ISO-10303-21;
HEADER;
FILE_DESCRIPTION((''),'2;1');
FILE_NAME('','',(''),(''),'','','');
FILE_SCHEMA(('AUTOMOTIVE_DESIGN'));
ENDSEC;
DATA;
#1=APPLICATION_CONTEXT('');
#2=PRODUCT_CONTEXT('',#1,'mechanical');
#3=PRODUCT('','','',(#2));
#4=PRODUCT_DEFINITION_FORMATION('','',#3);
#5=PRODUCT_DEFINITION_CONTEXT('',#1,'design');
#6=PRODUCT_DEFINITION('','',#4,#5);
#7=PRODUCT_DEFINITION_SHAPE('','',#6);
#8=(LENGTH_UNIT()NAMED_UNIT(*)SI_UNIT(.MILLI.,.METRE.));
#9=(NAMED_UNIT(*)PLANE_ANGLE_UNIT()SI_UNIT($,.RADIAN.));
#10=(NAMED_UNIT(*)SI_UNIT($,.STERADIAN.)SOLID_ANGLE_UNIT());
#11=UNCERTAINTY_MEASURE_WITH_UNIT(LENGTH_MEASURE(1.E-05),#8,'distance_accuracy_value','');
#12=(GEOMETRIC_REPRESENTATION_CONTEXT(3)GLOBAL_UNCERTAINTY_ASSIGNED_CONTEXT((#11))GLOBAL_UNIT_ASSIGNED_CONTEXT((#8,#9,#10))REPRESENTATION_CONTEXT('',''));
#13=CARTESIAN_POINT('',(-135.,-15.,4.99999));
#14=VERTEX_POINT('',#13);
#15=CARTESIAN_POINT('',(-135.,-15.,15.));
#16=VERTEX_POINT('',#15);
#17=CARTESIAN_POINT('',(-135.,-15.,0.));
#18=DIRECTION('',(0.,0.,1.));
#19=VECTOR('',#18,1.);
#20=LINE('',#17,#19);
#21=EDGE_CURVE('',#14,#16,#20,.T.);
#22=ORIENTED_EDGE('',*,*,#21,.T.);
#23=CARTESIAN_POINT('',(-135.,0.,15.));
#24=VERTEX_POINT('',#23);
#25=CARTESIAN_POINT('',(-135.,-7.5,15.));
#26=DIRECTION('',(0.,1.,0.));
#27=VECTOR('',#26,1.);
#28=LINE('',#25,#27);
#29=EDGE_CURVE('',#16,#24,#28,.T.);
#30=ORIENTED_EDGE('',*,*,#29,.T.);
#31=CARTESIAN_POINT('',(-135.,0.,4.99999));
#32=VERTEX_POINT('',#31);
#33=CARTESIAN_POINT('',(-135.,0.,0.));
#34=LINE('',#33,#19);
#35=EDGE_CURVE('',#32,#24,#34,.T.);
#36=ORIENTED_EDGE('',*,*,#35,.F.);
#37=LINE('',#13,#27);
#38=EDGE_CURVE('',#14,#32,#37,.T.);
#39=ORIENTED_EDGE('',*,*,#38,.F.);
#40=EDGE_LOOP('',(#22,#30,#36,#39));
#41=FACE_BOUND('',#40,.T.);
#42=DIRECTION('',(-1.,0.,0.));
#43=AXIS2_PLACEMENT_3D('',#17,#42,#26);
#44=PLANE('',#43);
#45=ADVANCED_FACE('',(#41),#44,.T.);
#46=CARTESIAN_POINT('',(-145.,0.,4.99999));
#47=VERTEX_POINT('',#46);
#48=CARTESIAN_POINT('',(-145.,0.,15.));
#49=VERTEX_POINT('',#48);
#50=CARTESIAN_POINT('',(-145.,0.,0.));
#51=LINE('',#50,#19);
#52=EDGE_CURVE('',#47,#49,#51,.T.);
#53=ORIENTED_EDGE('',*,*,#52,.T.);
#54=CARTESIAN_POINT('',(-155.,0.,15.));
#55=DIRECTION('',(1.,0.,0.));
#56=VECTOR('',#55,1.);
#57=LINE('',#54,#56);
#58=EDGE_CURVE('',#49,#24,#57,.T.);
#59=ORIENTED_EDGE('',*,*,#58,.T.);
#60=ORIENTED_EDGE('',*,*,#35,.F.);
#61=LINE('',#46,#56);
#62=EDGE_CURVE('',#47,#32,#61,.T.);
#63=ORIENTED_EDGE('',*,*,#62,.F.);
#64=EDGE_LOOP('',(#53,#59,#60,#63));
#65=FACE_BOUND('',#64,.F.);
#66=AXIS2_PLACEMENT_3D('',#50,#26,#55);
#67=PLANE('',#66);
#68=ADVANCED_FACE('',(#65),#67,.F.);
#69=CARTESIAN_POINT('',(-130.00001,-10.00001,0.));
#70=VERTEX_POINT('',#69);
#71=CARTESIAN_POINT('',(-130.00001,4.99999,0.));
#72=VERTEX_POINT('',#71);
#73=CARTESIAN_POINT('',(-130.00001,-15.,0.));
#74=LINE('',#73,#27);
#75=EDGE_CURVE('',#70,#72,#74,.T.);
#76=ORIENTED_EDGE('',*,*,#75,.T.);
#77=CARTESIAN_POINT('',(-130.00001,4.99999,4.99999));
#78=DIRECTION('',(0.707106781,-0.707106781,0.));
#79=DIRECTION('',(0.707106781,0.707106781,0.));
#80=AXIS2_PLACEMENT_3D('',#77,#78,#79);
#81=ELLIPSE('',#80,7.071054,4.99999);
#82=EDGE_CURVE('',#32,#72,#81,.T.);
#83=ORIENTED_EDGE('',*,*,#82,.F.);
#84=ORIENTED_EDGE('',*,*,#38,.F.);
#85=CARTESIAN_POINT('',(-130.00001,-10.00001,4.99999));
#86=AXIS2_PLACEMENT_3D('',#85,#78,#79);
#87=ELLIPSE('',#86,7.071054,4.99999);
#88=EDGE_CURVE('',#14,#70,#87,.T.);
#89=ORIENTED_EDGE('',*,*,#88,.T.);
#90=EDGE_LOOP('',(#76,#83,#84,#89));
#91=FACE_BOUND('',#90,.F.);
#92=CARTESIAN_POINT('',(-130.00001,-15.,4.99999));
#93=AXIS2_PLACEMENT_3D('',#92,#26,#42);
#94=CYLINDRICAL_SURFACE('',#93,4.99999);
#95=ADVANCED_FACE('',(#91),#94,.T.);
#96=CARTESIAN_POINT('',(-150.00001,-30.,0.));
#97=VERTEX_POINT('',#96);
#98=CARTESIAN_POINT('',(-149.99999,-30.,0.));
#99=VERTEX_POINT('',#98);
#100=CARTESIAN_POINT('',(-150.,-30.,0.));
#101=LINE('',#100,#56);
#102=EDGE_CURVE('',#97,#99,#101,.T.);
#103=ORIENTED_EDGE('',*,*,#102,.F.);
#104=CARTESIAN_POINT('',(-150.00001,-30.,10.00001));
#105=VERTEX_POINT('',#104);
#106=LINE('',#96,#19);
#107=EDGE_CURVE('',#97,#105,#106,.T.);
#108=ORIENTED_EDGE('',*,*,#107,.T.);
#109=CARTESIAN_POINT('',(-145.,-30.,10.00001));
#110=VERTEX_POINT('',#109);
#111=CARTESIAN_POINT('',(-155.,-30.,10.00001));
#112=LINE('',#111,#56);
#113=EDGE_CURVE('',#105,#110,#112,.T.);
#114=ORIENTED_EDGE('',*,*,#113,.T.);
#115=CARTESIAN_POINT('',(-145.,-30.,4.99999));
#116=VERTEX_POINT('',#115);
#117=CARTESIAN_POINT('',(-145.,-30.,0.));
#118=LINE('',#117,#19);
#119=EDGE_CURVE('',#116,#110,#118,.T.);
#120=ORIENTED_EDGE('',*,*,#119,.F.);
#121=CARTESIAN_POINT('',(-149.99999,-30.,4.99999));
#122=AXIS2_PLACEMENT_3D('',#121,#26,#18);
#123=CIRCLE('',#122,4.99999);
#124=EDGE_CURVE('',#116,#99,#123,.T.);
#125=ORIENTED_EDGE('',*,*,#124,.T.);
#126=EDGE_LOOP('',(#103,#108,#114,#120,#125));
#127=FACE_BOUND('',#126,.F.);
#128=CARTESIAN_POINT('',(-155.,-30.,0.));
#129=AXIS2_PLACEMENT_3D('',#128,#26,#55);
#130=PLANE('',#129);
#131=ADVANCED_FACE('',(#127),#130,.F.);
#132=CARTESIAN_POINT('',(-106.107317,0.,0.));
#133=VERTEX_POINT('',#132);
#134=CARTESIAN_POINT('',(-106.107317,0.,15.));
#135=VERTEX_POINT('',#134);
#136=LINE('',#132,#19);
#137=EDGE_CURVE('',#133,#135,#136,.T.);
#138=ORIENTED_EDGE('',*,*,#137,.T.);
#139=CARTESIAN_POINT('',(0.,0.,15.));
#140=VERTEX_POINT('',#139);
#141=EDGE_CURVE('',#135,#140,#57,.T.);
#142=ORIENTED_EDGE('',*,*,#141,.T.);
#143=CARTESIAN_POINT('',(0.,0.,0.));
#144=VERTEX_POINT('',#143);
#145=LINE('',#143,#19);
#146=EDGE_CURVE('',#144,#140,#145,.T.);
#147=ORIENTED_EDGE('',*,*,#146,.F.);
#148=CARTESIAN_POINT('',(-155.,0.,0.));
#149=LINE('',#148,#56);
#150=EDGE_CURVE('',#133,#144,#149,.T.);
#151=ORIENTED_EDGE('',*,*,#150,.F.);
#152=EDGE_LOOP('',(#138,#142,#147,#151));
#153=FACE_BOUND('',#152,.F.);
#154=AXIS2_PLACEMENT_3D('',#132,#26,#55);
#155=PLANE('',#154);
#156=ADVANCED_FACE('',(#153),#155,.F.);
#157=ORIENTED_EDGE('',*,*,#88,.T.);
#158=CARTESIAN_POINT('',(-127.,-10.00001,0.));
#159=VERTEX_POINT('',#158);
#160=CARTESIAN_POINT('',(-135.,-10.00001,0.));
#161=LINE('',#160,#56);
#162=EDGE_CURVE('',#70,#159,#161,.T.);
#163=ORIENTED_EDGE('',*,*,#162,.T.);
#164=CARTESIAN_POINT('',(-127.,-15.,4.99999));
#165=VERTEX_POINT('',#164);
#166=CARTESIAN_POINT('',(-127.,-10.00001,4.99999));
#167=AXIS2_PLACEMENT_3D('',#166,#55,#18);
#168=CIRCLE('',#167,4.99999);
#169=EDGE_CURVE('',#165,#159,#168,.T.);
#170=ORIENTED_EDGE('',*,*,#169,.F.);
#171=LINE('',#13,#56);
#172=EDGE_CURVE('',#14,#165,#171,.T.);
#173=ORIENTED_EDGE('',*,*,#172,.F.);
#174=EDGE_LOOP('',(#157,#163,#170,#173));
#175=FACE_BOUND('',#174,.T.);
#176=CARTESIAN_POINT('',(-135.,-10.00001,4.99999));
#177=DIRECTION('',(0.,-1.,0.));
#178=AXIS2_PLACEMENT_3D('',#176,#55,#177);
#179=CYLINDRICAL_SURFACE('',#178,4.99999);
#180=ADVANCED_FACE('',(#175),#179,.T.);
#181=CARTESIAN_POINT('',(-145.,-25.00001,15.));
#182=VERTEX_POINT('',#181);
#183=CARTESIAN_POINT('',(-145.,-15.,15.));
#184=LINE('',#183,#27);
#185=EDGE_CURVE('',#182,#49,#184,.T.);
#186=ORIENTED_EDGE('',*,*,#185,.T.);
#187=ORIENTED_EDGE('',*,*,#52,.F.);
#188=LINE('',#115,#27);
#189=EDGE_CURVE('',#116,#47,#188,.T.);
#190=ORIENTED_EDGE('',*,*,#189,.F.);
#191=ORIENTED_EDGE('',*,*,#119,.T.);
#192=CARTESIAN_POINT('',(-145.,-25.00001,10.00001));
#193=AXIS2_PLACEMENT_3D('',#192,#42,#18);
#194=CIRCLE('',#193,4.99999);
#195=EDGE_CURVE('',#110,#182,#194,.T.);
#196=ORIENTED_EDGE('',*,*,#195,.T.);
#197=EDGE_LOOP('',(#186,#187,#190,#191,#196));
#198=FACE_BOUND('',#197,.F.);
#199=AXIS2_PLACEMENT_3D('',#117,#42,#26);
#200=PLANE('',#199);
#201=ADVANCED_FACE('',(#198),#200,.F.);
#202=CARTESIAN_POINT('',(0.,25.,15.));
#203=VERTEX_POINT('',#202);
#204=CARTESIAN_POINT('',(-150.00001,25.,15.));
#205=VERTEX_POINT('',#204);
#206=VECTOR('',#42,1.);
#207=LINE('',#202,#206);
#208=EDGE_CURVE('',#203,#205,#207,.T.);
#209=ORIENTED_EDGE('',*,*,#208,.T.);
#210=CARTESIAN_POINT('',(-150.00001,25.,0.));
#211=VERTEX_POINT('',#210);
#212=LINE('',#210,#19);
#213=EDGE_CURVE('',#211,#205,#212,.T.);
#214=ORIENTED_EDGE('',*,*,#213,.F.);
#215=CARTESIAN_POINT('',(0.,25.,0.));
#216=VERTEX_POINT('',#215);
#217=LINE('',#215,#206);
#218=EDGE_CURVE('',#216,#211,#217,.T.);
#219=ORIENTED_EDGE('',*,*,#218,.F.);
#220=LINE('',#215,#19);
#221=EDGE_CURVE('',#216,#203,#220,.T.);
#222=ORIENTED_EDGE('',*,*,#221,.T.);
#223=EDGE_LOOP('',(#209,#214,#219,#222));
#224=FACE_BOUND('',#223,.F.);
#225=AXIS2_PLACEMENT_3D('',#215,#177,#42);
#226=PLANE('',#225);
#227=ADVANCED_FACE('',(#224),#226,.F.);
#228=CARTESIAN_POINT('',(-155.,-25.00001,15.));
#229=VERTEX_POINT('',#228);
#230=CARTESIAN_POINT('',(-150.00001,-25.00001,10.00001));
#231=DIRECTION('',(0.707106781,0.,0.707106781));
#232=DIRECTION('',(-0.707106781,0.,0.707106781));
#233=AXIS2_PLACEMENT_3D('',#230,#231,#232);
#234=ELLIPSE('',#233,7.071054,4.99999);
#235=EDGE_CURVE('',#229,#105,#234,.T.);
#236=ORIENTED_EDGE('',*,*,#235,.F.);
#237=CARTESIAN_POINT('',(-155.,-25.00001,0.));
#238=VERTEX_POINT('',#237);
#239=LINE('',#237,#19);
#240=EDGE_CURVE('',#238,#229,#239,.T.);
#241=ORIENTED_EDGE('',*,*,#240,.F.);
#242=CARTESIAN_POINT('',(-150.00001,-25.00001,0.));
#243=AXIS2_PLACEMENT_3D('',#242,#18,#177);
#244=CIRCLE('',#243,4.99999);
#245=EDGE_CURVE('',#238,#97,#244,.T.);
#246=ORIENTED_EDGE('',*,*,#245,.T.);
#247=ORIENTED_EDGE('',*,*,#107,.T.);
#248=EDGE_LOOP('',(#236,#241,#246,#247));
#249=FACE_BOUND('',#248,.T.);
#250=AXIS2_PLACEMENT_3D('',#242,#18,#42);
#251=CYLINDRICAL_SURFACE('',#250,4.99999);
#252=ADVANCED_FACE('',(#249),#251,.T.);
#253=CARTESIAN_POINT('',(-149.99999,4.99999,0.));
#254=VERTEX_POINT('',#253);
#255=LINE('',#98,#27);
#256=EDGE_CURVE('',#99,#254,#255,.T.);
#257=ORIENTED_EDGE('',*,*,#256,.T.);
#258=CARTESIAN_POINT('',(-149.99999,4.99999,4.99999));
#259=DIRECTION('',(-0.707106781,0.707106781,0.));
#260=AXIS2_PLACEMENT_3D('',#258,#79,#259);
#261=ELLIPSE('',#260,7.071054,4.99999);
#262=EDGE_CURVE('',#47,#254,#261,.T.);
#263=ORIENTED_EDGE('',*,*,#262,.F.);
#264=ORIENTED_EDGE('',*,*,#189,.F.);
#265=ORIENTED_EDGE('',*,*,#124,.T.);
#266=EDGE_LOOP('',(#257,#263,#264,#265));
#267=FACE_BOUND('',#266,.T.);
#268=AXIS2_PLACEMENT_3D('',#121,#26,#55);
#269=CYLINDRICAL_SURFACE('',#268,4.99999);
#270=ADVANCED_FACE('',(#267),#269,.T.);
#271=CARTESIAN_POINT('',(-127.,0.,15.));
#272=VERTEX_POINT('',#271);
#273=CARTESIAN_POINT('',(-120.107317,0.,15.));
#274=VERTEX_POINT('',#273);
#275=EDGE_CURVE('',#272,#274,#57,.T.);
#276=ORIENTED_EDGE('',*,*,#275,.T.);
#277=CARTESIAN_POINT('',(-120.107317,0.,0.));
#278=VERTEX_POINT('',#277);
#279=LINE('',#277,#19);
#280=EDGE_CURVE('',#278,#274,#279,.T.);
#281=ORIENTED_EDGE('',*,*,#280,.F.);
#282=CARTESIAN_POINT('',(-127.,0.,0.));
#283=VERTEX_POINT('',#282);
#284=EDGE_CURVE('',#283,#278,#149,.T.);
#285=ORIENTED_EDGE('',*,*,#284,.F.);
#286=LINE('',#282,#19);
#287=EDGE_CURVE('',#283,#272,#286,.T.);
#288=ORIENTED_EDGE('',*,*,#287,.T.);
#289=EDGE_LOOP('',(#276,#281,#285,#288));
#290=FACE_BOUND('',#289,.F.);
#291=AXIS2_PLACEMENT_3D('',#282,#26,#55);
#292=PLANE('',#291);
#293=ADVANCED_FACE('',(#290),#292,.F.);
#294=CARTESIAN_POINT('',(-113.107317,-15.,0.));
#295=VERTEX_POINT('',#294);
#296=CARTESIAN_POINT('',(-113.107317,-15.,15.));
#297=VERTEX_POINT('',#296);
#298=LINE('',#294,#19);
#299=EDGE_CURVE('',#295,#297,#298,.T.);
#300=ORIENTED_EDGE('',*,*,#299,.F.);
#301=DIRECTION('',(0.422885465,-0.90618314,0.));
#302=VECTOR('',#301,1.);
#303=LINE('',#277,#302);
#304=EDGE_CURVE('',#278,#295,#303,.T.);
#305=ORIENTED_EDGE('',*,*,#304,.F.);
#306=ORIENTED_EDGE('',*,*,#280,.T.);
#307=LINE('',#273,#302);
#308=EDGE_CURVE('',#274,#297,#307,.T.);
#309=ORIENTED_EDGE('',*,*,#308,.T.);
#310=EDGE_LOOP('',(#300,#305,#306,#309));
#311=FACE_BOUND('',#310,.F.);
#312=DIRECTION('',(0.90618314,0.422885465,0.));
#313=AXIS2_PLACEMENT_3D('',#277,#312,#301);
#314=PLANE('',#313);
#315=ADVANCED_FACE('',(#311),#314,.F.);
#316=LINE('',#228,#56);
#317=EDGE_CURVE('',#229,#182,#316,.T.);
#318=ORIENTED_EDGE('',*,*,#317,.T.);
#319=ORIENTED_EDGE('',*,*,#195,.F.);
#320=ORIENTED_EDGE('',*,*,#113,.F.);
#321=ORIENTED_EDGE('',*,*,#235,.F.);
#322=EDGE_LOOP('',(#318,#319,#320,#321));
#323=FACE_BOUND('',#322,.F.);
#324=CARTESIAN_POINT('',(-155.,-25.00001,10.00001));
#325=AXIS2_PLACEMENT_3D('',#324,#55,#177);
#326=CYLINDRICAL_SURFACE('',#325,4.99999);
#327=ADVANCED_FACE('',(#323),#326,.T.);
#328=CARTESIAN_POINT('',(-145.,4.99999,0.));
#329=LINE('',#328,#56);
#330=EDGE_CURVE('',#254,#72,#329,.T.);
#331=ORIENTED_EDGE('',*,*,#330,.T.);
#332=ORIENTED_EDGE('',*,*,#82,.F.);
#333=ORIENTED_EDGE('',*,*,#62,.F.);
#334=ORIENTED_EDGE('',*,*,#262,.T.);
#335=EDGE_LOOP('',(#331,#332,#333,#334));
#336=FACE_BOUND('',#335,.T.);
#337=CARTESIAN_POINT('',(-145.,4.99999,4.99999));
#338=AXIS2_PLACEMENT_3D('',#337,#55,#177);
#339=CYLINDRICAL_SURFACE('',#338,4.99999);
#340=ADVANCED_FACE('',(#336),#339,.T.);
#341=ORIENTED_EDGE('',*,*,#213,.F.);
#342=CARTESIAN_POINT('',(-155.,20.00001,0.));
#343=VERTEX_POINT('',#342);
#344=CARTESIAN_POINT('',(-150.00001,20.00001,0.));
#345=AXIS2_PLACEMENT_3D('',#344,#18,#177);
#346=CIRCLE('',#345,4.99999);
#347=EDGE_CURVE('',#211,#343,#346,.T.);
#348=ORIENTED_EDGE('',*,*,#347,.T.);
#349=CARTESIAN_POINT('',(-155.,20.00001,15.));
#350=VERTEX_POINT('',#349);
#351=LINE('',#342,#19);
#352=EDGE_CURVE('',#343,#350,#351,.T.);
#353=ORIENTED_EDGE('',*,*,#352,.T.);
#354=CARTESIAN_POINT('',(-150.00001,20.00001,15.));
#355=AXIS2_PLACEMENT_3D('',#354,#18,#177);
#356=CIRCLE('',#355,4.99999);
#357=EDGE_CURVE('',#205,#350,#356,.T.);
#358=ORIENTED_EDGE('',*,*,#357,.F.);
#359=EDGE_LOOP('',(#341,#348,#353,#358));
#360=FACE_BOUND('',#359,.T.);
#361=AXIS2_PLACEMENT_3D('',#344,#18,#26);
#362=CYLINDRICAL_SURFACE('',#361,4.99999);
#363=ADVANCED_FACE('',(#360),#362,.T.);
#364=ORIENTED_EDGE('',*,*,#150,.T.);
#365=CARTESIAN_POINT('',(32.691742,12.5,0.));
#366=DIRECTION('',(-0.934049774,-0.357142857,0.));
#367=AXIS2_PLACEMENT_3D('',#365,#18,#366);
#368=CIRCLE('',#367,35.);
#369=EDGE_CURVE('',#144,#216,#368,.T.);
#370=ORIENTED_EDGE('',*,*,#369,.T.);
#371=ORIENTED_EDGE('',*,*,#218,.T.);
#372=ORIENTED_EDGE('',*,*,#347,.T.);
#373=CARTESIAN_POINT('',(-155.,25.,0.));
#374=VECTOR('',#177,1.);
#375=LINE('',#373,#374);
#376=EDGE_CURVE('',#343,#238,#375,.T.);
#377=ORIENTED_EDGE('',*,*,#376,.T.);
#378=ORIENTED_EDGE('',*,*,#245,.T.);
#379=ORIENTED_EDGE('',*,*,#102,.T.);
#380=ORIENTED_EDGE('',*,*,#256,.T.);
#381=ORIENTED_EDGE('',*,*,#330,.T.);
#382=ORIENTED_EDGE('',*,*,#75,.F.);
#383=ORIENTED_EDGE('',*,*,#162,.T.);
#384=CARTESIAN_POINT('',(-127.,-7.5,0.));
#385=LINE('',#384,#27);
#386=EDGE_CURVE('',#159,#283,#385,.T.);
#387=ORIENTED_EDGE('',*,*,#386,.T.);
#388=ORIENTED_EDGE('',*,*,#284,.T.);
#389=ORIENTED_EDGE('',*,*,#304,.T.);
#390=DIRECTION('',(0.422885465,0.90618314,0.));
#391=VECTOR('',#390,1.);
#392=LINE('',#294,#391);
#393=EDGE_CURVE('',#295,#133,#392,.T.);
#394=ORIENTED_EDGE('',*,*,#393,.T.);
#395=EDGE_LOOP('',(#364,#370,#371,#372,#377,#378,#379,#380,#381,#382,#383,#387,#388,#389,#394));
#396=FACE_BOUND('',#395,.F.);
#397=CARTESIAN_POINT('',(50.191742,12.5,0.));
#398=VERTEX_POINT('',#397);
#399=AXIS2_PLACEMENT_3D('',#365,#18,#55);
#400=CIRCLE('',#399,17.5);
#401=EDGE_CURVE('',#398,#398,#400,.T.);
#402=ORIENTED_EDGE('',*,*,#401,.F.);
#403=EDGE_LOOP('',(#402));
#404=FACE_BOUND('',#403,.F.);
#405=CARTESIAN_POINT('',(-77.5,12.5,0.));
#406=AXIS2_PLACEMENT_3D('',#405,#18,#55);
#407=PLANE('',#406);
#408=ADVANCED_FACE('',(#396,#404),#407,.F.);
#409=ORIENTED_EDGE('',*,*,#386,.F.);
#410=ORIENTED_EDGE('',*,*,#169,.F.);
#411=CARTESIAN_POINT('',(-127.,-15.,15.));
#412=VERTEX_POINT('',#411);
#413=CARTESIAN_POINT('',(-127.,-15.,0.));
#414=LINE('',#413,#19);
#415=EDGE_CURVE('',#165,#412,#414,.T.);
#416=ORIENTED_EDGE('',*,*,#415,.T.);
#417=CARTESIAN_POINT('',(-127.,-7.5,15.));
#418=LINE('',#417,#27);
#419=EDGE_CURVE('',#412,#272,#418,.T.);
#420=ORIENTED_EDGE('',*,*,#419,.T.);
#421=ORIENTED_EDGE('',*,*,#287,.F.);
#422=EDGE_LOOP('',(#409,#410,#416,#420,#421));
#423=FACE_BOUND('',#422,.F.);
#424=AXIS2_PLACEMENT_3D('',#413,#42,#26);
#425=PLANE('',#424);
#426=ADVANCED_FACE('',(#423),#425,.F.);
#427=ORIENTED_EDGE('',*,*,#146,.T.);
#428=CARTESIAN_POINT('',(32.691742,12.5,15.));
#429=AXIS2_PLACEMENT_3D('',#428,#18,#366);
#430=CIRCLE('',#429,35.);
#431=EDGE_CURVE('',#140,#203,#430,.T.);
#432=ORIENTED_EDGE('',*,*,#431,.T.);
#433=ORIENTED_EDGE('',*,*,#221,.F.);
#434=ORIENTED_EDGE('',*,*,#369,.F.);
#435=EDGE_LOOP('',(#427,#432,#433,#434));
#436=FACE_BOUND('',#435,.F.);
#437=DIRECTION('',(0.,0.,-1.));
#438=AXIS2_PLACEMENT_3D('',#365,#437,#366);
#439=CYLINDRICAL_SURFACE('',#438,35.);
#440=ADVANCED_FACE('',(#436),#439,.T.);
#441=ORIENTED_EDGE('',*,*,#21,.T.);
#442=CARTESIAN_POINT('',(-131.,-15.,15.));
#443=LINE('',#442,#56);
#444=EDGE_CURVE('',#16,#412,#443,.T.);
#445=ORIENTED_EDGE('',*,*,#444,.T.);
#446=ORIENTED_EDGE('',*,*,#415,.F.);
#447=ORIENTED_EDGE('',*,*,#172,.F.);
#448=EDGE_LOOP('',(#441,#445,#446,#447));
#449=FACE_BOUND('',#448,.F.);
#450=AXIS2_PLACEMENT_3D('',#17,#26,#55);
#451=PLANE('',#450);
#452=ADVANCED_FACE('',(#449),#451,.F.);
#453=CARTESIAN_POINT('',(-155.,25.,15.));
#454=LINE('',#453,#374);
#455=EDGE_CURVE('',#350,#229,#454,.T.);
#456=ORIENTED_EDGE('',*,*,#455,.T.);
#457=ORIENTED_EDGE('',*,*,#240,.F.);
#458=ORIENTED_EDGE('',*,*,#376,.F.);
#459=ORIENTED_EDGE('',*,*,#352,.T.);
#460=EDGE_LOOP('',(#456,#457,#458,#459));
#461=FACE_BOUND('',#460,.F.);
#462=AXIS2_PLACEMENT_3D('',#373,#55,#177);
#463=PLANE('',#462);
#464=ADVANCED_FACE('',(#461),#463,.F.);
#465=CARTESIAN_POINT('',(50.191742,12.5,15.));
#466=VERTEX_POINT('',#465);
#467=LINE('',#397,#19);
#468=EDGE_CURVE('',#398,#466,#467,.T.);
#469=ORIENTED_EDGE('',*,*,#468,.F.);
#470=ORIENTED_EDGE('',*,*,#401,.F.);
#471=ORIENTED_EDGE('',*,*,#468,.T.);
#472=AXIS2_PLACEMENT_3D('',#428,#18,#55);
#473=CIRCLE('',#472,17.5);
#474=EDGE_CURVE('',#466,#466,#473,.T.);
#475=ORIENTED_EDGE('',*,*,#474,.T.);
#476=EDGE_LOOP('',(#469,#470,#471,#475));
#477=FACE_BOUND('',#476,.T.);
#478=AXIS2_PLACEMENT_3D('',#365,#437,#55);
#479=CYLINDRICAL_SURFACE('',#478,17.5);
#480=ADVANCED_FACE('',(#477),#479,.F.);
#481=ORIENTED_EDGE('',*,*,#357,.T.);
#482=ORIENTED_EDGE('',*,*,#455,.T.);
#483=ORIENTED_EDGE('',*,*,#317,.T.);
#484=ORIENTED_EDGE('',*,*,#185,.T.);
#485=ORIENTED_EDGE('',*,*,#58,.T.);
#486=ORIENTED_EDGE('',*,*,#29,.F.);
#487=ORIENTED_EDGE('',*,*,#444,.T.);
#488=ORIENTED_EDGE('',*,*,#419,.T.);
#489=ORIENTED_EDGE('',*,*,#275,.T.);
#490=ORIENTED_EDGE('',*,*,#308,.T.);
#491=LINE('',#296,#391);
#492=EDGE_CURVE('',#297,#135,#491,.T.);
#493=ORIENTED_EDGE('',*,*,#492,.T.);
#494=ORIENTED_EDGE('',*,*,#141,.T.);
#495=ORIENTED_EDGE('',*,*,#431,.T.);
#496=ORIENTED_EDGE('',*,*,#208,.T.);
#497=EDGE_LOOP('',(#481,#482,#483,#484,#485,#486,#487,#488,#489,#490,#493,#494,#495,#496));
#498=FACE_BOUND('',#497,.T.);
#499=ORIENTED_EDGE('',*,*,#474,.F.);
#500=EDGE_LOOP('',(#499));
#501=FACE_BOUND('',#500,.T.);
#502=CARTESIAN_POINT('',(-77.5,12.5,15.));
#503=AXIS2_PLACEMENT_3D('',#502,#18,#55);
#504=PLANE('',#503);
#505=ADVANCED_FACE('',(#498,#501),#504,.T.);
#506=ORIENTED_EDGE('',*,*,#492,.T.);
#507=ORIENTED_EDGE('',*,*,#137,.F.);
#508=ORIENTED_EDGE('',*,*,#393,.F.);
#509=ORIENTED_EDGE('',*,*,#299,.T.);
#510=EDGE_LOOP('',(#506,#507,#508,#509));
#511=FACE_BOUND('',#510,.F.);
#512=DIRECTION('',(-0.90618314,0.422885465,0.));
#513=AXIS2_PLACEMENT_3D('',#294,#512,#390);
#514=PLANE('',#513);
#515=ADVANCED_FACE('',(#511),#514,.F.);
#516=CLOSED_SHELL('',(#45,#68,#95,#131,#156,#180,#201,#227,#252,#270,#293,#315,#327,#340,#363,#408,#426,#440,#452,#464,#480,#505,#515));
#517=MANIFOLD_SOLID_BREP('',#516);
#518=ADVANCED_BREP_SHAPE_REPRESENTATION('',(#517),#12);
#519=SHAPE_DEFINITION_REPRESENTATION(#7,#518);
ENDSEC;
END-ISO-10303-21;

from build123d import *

# Parameters (mm, degrees)
F0_R     = 17.5
F0_W     = 10
F0_H     = 30
F0_W_2   = 8
F0_H_2   = 15
F1_DEPTH = 15
F2_R     = 4.99999


# Not quite as in the source:
# - a fillet or chamfer is up to 0.001 mm smaller than in the source, because OpenCascade refuses the exact size


with BuildPart() as f1:
    # F0 (on Top) → F1 (new body)
    with BuildSketch(Plane.XY):
        Polygon((-106.1073173197, 0), (0, 0), (0, 25), (-155, 25), (-155, 0), (-145, 0), (-135, 0), (-127, 0), (-120.1073173197, 0), align=None)
        with BuildLine():
            Line((0, 25), (0, 0))
            ThreePointArc((0, 0), (67.6917420766, 12.5), (0, 25))
        make_face()
        with Locations((32.6917420766, 12.5)):
            Circle(F0_R, mode=Mode.SUBTRACT)
        Polygon((-113.1073173197, -15), (-106.1073173197, 0), (-120.1073173197, 0), align=None)
        with Locations((-150, -15)):
            Rectangle(F0_W, F0_H)
        with Locations((-131, -7.5)):
            Rectangle(F0_W_2, F0_H_2)
    extrude(amount=F1_DEPTH)

    # F2 (radius 5 in the source; OpenCascade refuses exactly that, so slightly less here)
    f2_edges = [f1.edges().sort_by_distance(p)[0] for p in [
        (-155, 25, 7.5),
        (-155, -30, 7.5),
        (-150, -30, 15),
        (-145, -15, 0),
        (-140, 0, 0),
        (-135, -7.5, 0),
        (-131, -15, 0),
    ]]
    fillet(f2_edges, radius=F2_R)


solid = f1.part
